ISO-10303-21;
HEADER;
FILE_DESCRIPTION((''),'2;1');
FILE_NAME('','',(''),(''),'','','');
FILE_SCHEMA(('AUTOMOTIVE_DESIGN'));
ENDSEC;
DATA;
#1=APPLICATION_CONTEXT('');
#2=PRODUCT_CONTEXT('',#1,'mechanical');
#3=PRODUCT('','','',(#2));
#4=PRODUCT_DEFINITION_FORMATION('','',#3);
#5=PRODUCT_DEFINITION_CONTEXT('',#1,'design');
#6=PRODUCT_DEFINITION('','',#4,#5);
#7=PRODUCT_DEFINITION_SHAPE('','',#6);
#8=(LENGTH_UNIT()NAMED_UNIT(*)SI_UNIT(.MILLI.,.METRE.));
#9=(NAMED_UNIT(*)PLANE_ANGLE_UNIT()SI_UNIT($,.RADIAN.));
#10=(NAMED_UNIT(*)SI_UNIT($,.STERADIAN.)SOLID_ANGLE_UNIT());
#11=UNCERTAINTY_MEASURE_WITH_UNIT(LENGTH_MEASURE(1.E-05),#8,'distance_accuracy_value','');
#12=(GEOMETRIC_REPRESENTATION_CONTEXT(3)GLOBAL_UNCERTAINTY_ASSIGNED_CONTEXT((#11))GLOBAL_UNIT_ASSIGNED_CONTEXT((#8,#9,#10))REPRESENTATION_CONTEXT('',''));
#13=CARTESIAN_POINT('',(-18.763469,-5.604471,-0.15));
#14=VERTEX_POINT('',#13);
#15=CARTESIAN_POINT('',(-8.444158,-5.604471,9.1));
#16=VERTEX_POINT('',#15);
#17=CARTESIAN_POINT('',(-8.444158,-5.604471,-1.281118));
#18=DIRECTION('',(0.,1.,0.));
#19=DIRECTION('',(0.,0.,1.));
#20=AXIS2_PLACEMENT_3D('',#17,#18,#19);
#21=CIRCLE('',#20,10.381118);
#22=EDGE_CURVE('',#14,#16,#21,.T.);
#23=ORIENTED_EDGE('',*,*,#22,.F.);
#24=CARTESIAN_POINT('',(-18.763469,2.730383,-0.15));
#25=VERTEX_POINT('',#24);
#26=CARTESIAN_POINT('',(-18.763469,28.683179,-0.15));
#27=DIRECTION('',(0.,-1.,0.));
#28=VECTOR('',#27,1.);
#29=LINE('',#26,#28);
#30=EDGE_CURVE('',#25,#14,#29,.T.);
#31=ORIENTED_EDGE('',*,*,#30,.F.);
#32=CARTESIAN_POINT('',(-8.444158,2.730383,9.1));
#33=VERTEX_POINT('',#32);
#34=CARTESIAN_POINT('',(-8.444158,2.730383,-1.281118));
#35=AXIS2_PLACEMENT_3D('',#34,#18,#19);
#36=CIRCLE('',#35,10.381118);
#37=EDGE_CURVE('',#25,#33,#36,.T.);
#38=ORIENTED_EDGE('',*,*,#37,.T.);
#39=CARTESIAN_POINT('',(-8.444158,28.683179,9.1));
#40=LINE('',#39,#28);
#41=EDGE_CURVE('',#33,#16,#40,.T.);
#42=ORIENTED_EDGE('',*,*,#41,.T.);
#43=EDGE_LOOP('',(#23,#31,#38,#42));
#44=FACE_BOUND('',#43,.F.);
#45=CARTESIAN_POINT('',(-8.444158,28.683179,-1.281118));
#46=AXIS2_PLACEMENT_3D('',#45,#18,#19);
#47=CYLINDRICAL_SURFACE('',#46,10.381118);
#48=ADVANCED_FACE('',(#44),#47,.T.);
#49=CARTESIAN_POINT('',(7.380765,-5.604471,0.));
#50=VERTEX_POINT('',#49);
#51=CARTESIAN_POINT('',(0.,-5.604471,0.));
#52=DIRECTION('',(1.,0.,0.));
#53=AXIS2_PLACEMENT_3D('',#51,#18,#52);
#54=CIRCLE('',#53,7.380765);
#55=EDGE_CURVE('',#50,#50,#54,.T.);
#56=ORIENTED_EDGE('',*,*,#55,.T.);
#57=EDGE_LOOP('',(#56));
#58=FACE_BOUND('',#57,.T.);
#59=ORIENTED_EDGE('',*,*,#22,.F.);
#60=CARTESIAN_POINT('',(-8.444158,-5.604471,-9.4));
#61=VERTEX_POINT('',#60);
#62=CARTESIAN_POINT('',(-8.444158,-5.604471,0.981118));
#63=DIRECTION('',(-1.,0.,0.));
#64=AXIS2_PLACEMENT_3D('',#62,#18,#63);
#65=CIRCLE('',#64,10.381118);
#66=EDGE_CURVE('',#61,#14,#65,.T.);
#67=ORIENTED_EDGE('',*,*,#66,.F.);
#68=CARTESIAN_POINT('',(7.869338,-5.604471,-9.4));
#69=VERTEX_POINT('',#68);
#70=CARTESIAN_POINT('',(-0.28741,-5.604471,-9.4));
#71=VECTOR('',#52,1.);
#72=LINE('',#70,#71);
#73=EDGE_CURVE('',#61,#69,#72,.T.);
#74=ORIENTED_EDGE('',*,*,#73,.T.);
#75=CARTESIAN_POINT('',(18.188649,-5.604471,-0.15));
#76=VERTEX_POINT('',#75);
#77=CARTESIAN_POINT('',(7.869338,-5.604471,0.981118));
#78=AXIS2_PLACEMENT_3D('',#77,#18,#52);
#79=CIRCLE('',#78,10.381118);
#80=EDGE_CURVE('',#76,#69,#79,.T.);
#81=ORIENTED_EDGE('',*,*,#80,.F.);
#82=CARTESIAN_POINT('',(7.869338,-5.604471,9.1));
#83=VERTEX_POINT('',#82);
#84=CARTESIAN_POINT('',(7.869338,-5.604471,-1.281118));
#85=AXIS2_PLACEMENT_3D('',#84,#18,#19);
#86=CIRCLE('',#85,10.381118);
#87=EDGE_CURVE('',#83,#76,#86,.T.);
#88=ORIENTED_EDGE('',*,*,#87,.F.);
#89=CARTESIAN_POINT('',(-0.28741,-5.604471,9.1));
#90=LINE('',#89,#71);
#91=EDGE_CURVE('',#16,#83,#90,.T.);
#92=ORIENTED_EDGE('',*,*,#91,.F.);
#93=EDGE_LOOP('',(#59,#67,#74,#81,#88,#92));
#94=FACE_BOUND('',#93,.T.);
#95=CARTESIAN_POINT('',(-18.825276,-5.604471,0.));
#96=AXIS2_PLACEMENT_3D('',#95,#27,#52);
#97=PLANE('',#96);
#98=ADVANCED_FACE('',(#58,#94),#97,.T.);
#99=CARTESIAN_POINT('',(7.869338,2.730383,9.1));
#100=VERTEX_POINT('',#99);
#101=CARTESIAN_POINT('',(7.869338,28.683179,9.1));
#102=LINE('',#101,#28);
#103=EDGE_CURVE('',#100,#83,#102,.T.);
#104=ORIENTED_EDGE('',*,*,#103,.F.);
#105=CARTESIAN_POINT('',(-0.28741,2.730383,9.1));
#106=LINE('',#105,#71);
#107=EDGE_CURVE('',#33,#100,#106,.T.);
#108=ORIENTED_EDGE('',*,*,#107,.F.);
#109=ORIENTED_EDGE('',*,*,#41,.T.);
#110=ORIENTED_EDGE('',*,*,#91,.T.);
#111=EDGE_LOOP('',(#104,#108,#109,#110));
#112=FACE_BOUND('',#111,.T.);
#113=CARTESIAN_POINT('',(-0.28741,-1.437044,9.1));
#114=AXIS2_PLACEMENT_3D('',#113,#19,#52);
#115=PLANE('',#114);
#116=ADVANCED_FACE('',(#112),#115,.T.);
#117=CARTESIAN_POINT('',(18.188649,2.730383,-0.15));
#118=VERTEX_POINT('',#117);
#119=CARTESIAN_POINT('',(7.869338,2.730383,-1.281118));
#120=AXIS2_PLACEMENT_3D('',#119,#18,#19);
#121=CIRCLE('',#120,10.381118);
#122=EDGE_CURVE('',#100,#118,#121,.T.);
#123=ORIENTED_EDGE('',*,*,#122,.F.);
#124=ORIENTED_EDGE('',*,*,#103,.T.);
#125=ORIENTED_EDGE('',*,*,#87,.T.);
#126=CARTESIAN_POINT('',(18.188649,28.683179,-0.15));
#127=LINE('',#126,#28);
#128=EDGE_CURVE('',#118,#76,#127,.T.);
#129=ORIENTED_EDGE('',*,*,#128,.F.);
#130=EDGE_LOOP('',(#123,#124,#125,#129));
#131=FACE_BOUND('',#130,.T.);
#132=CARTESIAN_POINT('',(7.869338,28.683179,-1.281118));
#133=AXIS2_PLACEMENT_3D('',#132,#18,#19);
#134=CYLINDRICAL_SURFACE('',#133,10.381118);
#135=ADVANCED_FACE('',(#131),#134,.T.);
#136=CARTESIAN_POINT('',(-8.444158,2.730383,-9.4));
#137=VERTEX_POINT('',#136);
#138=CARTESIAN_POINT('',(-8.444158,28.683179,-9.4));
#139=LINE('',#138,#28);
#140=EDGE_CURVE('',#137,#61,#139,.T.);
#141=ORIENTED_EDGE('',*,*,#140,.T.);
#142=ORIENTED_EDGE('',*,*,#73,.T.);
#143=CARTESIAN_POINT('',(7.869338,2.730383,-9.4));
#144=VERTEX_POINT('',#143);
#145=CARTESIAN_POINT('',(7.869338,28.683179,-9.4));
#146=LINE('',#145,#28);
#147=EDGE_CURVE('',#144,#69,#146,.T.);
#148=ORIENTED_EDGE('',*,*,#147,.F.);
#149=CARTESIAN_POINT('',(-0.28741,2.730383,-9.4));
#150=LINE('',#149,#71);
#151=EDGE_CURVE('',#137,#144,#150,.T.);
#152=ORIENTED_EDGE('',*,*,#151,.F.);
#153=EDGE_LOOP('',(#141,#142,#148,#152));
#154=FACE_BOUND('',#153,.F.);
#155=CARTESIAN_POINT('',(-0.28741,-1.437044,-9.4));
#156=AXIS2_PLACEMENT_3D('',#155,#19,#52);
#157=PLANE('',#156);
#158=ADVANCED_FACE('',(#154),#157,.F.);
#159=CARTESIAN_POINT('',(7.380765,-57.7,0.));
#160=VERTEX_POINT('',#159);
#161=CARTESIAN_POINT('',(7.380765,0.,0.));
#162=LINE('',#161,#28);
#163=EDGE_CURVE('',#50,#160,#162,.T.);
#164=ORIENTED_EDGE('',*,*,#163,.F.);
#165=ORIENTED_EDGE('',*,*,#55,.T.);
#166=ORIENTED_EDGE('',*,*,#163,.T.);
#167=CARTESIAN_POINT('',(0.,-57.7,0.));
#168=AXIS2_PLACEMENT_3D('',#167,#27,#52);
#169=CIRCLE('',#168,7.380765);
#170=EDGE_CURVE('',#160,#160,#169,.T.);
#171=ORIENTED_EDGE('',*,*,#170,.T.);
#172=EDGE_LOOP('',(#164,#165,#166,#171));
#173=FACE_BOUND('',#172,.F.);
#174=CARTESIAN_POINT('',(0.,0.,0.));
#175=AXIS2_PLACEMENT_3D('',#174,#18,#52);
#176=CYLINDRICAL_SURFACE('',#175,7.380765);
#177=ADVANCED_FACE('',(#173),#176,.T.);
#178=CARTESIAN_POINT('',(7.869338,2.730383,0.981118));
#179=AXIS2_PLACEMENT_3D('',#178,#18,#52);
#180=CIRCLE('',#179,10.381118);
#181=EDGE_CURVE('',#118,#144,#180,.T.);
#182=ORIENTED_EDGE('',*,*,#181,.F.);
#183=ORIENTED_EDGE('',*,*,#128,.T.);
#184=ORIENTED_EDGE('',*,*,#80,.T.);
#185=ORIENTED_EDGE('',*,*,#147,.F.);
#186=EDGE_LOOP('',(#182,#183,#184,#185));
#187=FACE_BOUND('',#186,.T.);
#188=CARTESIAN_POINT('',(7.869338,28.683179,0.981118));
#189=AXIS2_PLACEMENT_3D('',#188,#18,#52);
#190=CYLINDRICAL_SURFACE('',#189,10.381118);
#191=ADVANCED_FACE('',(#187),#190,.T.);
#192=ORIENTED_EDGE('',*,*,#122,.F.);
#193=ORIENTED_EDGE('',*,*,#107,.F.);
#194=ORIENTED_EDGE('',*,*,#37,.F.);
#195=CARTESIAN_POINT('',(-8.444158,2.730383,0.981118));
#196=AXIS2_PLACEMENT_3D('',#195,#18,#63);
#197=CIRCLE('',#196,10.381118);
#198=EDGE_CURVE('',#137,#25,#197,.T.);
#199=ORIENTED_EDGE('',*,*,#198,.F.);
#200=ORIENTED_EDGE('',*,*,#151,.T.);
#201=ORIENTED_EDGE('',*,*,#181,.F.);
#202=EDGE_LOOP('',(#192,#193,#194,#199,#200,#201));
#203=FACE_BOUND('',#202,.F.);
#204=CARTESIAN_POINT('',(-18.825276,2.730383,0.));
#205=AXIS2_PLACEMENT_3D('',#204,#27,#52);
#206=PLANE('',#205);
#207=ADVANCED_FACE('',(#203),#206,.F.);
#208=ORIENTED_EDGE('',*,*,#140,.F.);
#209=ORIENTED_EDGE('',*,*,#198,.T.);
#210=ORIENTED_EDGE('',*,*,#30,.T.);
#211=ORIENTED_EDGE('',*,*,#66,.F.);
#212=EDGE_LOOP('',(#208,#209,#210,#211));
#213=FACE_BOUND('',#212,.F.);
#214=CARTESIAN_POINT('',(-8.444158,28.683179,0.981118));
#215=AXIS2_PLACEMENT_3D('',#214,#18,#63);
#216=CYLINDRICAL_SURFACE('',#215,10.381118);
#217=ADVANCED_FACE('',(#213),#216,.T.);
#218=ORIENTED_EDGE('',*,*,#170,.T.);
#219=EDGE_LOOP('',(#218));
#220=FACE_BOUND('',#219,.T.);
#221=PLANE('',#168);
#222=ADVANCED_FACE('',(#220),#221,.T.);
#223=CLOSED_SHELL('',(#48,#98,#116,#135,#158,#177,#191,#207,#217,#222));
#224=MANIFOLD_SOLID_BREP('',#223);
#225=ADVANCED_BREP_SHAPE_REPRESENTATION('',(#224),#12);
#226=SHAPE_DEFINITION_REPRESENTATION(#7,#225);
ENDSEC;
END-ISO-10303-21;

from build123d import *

# Parameters (mm, degrees)
F0_R          = 7.380765
F1_DEPTH      = 57.7
F2_W          = 37.0757319033
F2_H          = 8.3348543849
F3_DEPTH      = 9.1
F3_DEPTH_BACK = 9.4
F4_T1_DEPTH   = 60.2404459759


# Not quite as in the source:
# - a fillet or chamfer that OpenCascade refuses, or shapes differently, is made with other operations: its cross-section is extruded or revolved along the edge and cut away or added


with BuildPart() as f1:
    # F0 (on Front) → F1 (new body)
    with BuildSketch(Plane.XZ):
        Circle(F0_R)
    extrude(amount=F1_DEPTH)

    # F2 (on Top) → F3 (join, two sides)
    with BuildSketch(Plane.XY) as f3_sk:
        with Locations((-0.2874098718, -1.4370438876)):
            Rectangle(F2_W, F2_H)
    extrude(amount=F3_DEPTH)
    extrude(f3_sk.sketch, amount=-F3_DEPTH_BACK)

    # F4: fillet of radius 10.3811183182 on 4 edges, made by hand

    # F4_s2 → F4_t1 (cut)
    with BuildSketch(Plane.XZ.offset(-28.6831791004)):
        with BuildLine():
            ThreePointArc((-18.8252758235, 0.9811183182), (-15.7847166644, -6.3594408409), (-8.4441575053, -9.4))
            Line((-8.4441575053, -9.4), (-18.8252758235, -9.4))
            Line((-18.8252758235, -9.4), (-18.8252758235, 0.9811183182))
        make_face()
        with BuildLine():
            ThreePointArc((-8.4441575053, 9.1), (-15.7847166644, 6.0594408409), (-18.8252758235, -1.2811183182))
            Line((-18.8252758235, -1.2811183182), (-18.8252758235, 9.1))
            Line((-18.8252758235, 9.1), (-8.4441575053, 9.1))
        make_face()
        with BuildLine():
            ThreePointArc((7.8693377616, 9.1), (15.2098969207, 6.0594408409), (18.2504560798, -1.2811183182))
            Line((18.2504560798, -1.2811183182), (18.2504560798, 9.1))
            Line((18.2504560798, 9.1), (7.8693377616, 9.1))
        make_face()
        with BuildLine():
            ThreePointArc((18.2504560798, 0.9811183182), (15.2098969207, -6.3594408409), (7.8693377616, -9.4))
            Line((7.8693377616, -9.4), (18.2504560798, -9.4))
            Line((18.2504560798, -9.4), (18.2504560798, 0.9811183182))
        make_face()
    extrude(amount=F4_T1_DEPTH, mode=Mode.SUBTRACT)


solid = f1.part
